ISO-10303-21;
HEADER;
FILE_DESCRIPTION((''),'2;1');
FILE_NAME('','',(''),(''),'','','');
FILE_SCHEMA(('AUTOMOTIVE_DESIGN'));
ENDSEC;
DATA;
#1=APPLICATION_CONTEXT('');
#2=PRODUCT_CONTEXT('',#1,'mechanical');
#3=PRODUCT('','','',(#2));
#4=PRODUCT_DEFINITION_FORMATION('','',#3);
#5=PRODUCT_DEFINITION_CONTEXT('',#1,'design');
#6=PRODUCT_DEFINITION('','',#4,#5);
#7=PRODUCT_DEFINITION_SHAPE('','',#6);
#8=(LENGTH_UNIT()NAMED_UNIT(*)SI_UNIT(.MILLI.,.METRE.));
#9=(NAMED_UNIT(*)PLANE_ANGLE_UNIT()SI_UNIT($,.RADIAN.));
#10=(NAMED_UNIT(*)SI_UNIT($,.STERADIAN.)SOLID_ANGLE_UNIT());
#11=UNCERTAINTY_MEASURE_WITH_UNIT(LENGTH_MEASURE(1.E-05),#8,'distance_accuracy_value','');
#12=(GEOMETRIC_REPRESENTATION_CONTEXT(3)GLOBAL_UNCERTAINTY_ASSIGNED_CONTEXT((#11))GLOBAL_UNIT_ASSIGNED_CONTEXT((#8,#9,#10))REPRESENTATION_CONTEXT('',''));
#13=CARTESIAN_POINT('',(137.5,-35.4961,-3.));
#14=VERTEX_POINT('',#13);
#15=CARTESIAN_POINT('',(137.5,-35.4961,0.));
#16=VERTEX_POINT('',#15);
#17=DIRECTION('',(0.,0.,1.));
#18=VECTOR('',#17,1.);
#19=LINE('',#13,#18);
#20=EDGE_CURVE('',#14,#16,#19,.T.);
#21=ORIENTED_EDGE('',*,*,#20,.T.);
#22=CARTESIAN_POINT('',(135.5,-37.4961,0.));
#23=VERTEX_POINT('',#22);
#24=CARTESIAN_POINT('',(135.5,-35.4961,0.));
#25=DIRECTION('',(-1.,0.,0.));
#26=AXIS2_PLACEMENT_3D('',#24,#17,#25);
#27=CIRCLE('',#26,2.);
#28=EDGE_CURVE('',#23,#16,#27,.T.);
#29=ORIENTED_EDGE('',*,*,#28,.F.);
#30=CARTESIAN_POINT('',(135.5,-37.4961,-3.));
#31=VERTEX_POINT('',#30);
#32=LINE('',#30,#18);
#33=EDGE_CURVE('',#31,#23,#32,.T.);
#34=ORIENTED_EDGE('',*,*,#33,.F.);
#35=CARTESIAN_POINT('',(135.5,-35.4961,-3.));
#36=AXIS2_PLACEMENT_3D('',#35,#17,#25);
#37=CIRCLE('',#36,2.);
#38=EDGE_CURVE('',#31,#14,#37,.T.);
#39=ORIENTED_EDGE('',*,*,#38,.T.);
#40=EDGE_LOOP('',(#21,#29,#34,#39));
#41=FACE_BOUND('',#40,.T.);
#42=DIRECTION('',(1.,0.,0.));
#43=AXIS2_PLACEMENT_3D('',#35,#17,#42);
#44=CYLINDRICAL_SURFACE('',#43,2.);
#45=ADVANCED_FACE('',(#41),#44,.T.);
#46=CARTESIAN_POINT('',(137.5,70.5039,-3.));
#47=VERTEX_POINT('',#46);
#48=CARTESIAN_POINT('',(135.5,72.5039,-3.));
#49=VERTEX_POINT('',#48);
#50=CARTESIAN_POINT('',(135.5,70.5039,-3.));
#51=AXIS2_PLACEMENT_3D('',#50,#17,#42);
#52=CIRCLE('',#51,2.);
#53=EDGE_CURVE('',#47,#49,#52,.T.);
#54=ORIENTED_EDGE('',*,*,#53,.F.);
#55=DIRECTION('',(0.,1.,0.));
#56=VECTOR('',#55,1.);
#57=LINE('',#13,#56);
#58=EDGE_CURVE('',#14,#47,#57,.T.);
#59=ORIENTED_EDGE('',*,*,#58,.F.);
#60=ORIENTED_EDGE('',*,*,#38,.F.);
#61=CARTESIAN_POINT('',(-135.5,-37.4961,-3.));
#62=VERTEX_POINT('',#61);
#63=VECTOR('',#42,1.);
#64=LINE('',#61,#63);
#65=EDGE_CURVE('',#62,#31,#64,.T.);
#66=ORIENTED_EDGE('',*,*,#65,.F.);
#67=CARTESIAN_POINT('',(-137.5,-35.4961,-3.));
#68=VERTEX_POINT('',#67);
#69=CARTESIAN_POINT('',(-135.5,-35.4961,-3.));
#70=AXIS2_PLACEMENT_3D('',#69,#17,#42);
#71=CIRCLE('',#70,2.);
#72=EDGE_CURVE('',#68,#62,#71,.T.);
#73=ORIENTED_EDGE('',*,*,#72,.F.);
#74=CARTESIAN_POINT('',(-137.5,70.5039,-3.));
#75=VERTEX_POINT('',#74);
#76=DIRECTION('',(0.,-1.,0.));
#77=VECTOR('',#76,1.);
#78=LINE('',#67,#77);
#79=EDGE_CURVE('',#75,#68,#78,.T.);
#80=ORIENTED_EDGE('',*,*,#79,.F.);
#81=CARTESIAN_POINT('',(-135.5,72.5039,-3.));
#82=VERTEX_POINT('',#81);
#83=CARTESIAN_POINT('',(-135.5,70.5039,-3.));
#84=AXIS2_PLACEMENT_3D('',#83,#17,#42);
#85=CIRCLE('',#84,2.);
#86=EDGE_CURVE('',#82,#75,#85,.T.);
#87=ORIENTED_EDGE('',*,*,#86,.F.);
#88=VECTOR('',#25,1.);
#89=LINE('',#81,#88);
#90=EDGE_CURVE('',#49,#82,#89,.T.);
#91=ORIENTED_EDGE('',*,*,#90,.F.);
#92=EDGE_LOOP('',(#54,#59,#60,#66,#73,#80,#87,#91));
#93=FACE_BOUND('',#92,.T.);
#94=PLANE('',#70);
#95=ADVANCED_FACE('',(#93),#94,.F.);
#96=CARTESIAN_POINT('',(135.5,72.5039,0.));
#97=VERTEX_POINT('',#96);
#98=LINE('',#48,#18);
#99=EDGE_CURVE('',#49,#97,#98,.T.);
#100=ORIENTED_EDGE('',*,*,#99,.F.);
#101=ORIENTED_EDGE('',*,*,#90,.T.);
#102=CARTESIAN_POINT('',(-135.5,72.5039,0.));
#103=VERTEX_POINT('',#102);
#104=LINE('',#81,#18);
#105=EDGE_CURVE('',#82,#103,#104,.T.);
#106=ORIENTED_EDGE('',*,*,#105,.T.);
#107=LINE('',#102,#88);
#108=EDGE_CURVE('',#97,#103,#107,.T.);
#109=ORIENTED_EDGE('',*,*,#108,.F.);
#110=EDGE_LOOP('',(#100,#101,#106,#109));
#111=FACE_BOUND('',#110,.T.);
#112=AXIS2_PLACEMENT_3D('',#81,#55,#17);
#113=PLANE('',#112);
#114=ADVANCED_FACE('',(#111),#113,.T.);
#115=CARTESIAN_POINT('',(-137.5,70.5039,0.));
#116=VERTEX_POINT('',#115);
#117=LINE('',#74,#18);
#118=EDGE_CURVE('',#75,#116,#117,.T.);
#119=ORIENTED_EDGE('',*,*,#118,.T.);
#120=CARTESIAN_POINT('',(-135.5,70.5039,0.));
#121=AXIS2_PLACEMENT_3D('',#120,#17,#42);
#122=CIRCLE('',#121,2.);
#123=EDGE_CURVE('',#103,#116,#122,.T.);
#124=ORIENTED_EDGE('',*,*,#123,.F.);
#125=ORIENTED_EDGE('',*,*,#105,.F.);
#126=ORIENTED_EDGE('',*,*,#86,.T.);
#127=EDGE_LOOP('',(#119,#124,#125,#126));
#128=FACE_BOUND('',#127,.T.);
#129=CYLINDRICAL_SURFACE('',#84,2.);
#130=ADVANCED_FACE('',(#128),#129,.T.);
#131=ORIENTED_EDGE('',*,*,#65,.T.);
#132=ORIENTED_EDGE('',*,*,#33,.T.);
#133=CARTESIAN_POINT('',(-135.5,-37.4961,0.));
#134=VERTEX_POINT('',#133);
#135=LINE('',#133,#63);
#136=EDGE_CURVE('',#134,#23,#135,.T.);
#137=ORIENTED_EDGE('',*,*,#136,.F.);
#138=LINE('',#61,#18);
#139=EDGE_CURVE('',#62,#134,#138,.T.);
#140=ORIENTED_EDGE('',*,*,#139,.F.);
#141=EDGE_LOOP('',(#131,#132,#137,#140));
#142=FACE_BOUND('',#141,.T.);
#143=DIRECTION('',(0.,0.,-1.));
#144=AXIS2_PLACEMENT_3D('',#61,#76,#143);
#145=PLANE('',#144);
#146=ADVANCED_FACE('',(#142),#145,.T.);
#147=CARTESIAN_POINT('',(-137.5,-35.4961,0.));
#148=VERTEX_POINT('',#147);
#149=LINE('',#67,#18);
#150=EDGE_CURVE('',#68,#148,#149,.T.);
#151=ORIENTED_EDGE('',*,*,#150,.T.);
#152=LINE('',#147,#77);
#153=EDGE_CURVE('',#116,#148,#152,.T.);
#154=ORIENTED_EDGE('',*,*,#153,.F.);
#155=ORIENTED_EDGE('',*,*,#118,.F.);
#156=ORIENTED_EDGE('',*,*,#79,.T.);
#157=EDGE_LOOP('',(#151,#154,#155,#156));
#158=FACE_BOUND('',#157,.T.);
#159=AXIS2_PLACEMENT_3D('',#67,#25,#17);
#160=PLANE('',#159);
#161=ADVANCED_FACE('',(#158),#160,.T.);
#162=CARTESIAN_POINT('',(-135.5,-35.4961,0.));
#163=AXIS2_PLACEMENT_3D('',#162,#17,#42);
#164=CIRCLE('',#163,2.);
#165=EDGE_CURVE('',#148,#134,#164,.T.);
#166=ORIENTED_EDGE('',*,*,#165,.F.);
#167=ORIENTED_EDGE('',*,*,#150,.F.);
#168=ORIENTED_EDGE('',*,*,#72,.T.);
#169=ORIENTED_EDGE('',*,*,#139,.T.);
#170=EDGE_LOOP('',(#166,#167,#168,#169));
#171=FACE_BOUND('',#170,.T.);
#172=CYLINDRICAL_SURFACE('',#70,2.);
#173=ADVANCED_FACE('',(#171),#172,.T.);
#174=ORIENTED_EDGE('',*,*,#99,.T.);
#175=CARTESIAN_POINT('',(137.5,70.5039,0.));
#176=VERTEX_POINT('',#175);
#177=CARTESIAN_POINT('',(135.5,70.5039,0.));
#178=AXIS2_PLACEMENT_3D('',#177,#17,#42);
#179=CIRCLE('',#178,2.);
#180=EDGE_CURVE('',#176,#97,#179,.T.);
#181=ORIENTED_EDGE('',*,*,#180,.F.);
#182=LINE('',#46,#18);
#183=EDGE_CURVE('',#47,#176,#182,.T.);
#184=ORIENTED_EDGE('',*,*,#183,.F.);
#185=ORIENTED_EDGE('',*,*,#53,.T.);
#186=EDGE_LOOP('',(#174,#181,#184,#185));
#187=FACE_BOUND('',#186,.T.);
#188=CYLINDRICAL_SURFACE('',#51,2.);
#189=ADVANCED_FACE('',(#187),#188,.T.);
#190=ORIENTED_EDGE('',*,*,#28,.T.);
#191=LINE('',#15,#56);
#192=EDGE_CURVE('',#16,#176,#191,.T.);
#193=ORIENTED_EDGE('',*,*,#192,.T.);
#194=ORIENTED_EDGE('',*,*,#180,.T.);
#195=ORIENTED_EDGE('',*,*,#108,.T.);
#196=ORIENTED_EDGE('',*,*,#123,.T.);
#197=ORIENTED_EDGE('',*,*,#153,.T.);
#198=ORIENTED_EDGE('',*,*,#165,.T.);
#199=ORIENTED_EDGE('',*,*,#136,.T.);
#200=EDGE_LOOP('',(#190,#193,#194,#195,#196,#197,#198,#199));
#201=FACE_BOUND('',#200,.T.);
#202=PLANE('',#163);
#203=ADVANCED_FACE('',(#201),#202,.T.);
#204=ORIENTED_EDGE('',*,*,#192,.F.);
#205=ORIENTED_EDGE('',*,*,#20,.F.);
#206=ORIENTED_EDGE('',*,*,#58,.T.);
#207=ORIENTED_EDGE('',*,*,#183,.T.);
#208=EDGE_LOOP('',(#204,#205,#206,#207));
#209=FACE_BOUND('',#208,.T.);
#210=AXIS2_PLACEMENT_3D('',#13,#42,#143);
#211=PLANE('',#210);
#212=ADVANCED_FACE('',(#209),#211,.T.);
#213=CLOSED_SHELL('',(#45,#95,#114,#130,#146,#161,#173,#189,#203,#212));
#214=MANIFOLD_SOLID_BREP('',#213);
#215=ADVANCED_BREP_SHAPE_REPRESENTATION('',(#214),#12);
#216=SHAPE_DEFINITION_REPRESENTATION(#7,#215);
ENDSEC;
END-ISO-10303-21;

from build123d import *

# Parameters (mm, degrees)
SM_BASE_FLANGE_1_DEPTH = 3


# Sheet-metal steps are written as plain solids
with BuildPart() as part:
    # Sketch 1 → Базовая кромка1 (new body)
    with BuildSketch(Plane.XY):
        with BuildLine():
            Line((-135.5, -37.496099844), (135.5, -37.496099844))
            ThreePointArc((135.5, -37.496099844), (136.914213562, -36.910313406), (137.5, -35.496099844))
            Line((137.5, -35.496099844), (137.5, 70.503900156))
            ThreePointArc((137.5, 70.503900156), (136.914213562, 71.918113718), (135.5, 72.503900156))
            Line((135.5, 72.503900156), (-135.5, 72.503900156))
            ThreePointArc((-135.5, 72.503900156), (-136.914213562, 71.918113718), (-137.5, 70.503900156))
            Line((-137.5, 70.503900156), (-137.5, -35.496099844))
            ThreePointArc((-137.5, -35.496099844), (-136.914213562, -36.910313406), (-135.5, -37.496099844))
        make_face()
    extrude(amount=-SM_BASE_FLANGE_1_DEPTH)


solid = part.part
